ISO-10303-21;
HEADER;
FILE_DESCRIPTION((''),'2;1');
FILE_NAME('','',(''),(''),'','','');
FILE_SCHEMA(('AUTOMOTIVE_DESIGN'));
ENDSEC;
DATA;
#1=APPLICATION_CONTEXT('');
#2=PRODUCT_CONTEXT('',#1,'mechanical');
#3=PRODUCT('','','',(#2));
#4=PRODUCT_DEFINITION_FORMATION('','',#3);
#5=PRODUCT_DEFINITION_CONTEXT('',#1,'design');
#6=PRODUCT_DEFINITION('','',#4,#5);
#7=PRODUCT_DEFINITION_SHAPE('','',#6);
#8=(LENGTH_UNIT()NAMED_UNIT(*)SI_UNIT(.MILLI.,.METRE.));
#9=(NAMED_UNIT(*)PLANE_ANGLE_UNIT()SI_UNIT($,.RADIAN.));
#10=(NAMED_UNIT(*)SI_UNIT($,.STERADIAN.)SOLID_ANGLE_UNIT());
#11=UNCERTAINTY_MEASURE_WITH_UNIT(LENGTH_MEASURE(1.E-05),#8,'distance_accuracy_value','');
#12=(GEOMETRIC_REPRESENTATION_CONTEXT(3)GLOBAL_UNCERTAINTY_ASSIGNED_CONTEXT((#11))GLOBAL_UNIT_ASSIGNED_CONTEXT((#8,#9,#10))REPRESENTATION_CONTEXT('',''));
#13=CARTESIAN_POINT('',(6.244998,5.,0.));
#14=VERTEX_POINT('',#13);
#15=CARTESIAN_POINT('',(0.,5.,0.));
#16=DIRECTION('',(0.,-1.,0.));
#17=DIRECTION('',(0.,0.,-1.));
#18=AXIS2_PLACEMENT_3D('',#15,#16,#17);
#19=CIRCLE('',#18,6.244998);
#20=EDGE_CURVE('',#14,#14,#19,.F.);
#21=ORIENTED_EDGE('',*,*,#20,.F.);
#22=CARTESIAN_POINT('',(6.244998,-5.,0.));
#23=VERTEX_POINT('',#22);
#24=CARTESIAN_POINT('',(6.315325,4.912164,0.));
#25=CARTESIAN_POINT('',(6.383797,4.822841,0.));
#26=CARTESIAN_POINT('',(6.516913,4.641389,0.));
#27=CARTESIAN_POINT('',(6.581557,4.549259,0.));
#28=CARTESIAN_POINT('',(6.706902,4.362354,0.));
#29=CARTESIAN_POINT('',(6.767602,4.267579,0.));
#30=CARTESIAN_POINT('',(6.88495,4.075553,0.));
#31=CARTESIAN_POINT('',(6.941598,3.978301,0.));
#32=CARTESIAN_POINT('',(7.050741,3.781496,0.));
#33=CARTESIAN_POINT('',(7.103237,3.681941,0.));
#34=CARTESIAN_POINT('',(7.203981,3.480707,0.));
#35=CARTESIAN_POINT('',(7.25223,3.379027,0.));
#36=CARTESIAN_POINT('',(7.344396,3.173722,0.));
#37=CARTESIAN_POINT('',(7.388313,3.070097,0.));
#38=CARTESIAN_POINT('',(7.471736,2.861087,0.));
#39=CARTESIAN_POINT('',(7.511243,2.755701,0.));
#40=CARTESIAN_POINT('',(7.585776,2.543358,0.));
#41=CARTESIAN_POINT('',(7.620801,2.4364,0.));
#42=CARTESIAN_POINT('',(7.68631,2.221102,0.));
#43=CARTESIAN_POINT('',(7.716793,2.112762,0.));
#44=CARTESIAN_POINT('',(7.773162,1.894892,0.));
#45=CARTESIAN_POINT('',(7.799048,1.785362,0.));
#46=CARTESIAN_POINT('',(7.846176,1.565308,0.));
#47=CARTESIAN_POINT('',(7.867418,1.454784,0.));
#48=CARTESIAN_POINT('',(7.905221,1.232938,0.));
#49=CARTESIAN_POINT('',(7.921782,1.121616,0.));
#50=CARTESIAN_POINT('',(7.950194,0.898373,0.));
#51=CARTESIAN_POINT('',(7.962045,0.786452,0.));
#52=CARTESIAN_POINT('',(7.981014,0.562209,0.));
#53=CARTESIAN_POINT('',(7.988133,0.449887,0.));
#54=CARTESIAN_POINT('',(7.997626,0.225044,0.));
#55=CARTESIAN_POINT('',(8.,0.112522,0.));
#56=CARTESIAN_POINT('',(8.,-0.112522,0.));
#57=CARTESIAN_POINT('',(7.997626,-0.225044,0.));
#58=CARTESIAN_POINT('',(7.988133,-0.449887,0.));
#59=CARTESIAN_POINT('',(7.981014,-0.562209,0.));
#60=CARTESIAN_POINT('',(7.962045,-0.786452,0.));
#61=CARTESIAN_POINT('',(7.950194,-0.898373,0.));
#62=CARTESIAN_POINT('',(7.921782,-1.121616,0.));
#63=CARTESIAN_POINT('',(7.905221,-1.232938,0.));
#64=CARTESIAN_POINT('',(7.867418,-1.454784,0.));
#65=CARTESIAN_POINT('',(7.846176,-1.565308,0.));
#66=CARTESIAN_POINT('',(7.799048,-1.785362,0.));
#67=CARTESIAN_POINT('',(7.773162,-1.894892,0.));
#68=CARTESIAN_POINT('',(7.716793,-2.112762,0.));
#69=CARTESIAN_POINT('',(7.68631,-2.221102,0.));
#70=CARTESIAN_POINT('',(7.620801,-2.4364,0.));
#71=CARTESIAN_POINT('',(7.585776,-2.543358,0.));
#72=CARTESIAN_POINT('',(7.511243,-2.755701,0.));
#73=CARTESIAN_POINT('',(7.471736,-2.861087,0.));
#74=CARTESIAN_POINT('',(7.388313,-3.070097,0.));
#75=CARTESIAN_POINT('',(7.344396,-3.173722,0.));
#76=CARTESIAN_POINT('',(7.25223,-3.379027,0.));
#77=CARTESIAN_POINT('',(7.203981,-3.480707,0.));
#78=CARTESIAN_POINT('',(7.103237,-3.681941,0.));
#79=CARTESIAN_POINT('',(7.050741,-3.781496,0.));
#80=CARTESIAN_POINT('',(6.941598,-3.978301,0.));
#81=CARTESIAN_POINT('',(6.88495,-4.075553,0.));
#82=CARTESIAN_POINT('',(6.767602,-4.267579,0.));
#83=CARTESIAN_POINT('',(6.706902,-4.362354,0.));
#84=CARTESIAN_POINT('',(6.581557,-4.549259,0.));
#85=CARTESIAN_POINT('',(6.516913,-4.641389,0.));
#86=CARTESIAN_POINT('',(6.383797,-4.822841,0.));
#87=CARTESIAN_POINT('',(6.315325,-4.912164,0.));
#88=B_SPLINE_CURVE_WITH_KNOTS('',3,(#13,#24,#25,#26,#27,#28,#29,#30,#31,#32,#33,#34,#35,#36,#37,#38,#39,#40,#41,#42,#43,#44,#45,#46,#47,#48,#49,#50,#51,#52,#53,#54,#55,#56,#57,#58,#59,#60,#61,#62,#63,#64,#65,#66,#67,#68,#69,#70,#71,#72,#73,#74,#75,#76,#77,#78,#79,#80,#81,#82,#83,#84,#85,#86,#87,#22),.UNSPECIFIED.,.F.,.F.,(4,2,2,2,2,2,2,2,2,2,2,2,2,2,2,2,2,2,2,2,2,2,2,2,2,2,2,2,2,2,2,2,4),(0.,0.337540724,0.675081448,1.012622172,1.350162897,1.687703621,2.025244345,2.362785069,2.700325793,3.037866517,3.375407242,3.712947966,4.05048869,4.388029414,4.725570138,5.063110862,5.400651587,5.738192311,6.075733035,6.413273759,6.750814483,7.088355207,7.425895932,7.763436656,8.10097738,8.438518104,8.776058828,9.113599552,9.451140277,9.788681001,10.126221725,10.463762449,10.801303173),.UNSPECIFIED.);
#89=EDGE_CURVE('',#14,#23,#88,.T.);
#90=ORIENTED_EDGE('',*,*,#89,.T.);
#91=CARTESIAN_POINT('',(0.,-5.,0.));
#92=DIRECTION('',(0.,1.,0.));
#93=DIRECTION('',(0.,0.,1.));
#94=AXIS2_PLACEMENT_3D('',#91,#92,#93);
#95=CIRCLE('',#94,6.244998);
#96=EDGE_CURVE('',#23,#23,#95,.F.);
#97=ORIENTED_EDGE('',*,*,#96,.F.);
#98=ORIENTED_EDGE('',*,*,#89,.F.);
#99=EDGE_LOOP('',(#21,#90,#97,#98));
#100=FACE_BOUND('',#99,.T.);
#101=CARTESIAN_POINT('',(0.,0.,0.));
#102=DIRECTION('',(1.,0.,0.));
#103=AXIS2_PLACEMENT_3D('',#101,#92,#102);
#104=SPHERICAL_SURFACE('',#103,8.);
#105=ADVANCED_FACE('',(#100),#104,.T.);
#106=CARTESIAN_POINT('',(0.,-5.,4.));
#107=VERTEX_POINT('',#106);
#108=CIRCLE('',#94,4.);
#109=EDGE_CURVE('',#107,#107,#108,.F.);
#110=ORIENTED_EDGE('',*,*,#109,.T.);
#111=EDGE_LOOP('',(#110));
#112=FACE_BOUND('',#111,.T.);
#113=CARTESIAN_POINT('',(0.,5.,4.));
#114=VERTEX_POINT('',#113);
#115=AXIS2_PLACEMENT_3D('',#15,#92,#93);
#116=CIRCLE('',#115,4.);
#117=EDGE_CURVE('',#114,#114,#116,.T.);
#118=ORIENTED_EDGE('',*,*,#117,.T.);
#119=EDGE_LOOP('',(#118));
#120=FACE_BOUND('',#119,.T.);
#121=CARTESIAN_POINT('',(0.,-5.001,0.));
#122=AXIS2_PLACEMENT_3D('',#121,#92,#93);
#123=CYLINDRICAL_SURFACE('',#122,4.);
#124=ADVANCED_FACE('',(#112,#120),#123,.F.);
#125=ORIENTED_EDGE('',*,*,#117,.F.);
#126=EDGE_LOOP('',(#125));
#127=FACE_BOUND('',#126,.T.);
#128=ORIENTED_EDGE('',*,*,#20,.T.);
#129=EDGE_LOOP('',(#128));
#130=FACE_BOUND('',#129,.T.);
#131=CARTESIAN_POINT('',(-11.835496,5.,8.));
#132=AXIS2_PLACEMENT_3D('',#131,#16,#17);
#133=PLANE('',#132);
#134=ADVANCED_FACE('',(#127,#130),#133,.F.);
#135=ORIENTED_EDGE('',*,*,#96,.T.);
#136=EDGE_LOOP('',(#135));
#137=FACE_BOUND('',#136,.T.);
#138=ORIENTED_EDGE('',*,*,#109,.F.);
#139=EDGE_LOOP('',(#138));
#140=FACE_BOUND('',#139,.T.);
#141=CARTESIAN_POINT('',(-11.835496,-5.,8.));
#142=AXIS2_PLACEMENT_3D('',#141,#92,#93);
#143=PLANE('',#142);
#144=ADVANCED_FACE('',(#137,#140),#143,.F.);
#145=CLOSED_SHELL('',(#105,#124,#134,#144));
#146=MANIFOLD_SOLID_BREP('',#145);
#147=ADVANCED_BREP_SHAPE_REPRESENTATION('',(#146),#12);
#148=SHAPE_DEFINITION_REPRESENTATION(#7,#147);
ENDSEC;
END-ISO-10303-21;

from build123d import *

# Parameters (mm, degrees)
CUT_EXTRUDE1_START     = -6.244997998
CUT_EXTRUDE1_OUTLINE_W = 16
CUT_EXTRUDE1_OUTLINE_H = 4
CUT_EXTRUDE1_DEPTH     = 12.489995996
CUT_EXTRUDE2_REACH     = 17.1
SKETCH3_R              = 4


# Read off the part's stored shape, not the designer's step: Cut-Extrude1
with BuildPart() as part:
    # Sketch1 → Revolve1 (revolve)
    with BuildSketch(Plane.XY):
        with BuildLine():
            Line((0, 8), (0, -8))
            ThreePointArc((0, -8), (-8, 0), (0, 8))
        make_face()
    revolve(axis=Axis((0, 8, 0), (0, -1, 0)))

    # Cut-Extrude1 outline → Cut-Extrude1 (cut)
    with BuildSketch(Plane.XY.offset(CUT_EXTRUDE1_START)):
        with Locations((0, -7)):
            Rectangle(CUT_EXTRUDE1_OUTLINE_W, CUT_EXTRUDE1_OUTLINE_H)
        with Locations((0, 7)):
            Rectangle(CUT_EXTRUDE1_OUTLINE_W, CUT_EXTRUDE1_OUTLINE_H)
    extrude(amount=CUT_EXTRUDE1_DEPTH, mode=Mode.SUBTRACT)

    # Sketch3 → Cut-Extrude2 (cut, up to next)
    with BuildSketch(Plane(origin=(0, 5, 0), x_dir=(1, 0, 0), z_dir=(0, 1, 0)), mode=Mode.PRIVATE) as cut_extrude2_sk1:
        with Locations(Location((0, 0, 0), (0, 0, 270))):
            Circle(SKETCH3_R)
    cut_extrude2_tool1 = extrude(cut_extrude2_sk1.sketch, amount=-CUT_EXTRUDE2_REACH, mode=Mode.PRIVATE) & part.part
    add(cut_extrude2_tool1.solids().sort_by_distance((0, 5, 0))[0], mode=Mode.SUBTRACT)


solid = part.part
